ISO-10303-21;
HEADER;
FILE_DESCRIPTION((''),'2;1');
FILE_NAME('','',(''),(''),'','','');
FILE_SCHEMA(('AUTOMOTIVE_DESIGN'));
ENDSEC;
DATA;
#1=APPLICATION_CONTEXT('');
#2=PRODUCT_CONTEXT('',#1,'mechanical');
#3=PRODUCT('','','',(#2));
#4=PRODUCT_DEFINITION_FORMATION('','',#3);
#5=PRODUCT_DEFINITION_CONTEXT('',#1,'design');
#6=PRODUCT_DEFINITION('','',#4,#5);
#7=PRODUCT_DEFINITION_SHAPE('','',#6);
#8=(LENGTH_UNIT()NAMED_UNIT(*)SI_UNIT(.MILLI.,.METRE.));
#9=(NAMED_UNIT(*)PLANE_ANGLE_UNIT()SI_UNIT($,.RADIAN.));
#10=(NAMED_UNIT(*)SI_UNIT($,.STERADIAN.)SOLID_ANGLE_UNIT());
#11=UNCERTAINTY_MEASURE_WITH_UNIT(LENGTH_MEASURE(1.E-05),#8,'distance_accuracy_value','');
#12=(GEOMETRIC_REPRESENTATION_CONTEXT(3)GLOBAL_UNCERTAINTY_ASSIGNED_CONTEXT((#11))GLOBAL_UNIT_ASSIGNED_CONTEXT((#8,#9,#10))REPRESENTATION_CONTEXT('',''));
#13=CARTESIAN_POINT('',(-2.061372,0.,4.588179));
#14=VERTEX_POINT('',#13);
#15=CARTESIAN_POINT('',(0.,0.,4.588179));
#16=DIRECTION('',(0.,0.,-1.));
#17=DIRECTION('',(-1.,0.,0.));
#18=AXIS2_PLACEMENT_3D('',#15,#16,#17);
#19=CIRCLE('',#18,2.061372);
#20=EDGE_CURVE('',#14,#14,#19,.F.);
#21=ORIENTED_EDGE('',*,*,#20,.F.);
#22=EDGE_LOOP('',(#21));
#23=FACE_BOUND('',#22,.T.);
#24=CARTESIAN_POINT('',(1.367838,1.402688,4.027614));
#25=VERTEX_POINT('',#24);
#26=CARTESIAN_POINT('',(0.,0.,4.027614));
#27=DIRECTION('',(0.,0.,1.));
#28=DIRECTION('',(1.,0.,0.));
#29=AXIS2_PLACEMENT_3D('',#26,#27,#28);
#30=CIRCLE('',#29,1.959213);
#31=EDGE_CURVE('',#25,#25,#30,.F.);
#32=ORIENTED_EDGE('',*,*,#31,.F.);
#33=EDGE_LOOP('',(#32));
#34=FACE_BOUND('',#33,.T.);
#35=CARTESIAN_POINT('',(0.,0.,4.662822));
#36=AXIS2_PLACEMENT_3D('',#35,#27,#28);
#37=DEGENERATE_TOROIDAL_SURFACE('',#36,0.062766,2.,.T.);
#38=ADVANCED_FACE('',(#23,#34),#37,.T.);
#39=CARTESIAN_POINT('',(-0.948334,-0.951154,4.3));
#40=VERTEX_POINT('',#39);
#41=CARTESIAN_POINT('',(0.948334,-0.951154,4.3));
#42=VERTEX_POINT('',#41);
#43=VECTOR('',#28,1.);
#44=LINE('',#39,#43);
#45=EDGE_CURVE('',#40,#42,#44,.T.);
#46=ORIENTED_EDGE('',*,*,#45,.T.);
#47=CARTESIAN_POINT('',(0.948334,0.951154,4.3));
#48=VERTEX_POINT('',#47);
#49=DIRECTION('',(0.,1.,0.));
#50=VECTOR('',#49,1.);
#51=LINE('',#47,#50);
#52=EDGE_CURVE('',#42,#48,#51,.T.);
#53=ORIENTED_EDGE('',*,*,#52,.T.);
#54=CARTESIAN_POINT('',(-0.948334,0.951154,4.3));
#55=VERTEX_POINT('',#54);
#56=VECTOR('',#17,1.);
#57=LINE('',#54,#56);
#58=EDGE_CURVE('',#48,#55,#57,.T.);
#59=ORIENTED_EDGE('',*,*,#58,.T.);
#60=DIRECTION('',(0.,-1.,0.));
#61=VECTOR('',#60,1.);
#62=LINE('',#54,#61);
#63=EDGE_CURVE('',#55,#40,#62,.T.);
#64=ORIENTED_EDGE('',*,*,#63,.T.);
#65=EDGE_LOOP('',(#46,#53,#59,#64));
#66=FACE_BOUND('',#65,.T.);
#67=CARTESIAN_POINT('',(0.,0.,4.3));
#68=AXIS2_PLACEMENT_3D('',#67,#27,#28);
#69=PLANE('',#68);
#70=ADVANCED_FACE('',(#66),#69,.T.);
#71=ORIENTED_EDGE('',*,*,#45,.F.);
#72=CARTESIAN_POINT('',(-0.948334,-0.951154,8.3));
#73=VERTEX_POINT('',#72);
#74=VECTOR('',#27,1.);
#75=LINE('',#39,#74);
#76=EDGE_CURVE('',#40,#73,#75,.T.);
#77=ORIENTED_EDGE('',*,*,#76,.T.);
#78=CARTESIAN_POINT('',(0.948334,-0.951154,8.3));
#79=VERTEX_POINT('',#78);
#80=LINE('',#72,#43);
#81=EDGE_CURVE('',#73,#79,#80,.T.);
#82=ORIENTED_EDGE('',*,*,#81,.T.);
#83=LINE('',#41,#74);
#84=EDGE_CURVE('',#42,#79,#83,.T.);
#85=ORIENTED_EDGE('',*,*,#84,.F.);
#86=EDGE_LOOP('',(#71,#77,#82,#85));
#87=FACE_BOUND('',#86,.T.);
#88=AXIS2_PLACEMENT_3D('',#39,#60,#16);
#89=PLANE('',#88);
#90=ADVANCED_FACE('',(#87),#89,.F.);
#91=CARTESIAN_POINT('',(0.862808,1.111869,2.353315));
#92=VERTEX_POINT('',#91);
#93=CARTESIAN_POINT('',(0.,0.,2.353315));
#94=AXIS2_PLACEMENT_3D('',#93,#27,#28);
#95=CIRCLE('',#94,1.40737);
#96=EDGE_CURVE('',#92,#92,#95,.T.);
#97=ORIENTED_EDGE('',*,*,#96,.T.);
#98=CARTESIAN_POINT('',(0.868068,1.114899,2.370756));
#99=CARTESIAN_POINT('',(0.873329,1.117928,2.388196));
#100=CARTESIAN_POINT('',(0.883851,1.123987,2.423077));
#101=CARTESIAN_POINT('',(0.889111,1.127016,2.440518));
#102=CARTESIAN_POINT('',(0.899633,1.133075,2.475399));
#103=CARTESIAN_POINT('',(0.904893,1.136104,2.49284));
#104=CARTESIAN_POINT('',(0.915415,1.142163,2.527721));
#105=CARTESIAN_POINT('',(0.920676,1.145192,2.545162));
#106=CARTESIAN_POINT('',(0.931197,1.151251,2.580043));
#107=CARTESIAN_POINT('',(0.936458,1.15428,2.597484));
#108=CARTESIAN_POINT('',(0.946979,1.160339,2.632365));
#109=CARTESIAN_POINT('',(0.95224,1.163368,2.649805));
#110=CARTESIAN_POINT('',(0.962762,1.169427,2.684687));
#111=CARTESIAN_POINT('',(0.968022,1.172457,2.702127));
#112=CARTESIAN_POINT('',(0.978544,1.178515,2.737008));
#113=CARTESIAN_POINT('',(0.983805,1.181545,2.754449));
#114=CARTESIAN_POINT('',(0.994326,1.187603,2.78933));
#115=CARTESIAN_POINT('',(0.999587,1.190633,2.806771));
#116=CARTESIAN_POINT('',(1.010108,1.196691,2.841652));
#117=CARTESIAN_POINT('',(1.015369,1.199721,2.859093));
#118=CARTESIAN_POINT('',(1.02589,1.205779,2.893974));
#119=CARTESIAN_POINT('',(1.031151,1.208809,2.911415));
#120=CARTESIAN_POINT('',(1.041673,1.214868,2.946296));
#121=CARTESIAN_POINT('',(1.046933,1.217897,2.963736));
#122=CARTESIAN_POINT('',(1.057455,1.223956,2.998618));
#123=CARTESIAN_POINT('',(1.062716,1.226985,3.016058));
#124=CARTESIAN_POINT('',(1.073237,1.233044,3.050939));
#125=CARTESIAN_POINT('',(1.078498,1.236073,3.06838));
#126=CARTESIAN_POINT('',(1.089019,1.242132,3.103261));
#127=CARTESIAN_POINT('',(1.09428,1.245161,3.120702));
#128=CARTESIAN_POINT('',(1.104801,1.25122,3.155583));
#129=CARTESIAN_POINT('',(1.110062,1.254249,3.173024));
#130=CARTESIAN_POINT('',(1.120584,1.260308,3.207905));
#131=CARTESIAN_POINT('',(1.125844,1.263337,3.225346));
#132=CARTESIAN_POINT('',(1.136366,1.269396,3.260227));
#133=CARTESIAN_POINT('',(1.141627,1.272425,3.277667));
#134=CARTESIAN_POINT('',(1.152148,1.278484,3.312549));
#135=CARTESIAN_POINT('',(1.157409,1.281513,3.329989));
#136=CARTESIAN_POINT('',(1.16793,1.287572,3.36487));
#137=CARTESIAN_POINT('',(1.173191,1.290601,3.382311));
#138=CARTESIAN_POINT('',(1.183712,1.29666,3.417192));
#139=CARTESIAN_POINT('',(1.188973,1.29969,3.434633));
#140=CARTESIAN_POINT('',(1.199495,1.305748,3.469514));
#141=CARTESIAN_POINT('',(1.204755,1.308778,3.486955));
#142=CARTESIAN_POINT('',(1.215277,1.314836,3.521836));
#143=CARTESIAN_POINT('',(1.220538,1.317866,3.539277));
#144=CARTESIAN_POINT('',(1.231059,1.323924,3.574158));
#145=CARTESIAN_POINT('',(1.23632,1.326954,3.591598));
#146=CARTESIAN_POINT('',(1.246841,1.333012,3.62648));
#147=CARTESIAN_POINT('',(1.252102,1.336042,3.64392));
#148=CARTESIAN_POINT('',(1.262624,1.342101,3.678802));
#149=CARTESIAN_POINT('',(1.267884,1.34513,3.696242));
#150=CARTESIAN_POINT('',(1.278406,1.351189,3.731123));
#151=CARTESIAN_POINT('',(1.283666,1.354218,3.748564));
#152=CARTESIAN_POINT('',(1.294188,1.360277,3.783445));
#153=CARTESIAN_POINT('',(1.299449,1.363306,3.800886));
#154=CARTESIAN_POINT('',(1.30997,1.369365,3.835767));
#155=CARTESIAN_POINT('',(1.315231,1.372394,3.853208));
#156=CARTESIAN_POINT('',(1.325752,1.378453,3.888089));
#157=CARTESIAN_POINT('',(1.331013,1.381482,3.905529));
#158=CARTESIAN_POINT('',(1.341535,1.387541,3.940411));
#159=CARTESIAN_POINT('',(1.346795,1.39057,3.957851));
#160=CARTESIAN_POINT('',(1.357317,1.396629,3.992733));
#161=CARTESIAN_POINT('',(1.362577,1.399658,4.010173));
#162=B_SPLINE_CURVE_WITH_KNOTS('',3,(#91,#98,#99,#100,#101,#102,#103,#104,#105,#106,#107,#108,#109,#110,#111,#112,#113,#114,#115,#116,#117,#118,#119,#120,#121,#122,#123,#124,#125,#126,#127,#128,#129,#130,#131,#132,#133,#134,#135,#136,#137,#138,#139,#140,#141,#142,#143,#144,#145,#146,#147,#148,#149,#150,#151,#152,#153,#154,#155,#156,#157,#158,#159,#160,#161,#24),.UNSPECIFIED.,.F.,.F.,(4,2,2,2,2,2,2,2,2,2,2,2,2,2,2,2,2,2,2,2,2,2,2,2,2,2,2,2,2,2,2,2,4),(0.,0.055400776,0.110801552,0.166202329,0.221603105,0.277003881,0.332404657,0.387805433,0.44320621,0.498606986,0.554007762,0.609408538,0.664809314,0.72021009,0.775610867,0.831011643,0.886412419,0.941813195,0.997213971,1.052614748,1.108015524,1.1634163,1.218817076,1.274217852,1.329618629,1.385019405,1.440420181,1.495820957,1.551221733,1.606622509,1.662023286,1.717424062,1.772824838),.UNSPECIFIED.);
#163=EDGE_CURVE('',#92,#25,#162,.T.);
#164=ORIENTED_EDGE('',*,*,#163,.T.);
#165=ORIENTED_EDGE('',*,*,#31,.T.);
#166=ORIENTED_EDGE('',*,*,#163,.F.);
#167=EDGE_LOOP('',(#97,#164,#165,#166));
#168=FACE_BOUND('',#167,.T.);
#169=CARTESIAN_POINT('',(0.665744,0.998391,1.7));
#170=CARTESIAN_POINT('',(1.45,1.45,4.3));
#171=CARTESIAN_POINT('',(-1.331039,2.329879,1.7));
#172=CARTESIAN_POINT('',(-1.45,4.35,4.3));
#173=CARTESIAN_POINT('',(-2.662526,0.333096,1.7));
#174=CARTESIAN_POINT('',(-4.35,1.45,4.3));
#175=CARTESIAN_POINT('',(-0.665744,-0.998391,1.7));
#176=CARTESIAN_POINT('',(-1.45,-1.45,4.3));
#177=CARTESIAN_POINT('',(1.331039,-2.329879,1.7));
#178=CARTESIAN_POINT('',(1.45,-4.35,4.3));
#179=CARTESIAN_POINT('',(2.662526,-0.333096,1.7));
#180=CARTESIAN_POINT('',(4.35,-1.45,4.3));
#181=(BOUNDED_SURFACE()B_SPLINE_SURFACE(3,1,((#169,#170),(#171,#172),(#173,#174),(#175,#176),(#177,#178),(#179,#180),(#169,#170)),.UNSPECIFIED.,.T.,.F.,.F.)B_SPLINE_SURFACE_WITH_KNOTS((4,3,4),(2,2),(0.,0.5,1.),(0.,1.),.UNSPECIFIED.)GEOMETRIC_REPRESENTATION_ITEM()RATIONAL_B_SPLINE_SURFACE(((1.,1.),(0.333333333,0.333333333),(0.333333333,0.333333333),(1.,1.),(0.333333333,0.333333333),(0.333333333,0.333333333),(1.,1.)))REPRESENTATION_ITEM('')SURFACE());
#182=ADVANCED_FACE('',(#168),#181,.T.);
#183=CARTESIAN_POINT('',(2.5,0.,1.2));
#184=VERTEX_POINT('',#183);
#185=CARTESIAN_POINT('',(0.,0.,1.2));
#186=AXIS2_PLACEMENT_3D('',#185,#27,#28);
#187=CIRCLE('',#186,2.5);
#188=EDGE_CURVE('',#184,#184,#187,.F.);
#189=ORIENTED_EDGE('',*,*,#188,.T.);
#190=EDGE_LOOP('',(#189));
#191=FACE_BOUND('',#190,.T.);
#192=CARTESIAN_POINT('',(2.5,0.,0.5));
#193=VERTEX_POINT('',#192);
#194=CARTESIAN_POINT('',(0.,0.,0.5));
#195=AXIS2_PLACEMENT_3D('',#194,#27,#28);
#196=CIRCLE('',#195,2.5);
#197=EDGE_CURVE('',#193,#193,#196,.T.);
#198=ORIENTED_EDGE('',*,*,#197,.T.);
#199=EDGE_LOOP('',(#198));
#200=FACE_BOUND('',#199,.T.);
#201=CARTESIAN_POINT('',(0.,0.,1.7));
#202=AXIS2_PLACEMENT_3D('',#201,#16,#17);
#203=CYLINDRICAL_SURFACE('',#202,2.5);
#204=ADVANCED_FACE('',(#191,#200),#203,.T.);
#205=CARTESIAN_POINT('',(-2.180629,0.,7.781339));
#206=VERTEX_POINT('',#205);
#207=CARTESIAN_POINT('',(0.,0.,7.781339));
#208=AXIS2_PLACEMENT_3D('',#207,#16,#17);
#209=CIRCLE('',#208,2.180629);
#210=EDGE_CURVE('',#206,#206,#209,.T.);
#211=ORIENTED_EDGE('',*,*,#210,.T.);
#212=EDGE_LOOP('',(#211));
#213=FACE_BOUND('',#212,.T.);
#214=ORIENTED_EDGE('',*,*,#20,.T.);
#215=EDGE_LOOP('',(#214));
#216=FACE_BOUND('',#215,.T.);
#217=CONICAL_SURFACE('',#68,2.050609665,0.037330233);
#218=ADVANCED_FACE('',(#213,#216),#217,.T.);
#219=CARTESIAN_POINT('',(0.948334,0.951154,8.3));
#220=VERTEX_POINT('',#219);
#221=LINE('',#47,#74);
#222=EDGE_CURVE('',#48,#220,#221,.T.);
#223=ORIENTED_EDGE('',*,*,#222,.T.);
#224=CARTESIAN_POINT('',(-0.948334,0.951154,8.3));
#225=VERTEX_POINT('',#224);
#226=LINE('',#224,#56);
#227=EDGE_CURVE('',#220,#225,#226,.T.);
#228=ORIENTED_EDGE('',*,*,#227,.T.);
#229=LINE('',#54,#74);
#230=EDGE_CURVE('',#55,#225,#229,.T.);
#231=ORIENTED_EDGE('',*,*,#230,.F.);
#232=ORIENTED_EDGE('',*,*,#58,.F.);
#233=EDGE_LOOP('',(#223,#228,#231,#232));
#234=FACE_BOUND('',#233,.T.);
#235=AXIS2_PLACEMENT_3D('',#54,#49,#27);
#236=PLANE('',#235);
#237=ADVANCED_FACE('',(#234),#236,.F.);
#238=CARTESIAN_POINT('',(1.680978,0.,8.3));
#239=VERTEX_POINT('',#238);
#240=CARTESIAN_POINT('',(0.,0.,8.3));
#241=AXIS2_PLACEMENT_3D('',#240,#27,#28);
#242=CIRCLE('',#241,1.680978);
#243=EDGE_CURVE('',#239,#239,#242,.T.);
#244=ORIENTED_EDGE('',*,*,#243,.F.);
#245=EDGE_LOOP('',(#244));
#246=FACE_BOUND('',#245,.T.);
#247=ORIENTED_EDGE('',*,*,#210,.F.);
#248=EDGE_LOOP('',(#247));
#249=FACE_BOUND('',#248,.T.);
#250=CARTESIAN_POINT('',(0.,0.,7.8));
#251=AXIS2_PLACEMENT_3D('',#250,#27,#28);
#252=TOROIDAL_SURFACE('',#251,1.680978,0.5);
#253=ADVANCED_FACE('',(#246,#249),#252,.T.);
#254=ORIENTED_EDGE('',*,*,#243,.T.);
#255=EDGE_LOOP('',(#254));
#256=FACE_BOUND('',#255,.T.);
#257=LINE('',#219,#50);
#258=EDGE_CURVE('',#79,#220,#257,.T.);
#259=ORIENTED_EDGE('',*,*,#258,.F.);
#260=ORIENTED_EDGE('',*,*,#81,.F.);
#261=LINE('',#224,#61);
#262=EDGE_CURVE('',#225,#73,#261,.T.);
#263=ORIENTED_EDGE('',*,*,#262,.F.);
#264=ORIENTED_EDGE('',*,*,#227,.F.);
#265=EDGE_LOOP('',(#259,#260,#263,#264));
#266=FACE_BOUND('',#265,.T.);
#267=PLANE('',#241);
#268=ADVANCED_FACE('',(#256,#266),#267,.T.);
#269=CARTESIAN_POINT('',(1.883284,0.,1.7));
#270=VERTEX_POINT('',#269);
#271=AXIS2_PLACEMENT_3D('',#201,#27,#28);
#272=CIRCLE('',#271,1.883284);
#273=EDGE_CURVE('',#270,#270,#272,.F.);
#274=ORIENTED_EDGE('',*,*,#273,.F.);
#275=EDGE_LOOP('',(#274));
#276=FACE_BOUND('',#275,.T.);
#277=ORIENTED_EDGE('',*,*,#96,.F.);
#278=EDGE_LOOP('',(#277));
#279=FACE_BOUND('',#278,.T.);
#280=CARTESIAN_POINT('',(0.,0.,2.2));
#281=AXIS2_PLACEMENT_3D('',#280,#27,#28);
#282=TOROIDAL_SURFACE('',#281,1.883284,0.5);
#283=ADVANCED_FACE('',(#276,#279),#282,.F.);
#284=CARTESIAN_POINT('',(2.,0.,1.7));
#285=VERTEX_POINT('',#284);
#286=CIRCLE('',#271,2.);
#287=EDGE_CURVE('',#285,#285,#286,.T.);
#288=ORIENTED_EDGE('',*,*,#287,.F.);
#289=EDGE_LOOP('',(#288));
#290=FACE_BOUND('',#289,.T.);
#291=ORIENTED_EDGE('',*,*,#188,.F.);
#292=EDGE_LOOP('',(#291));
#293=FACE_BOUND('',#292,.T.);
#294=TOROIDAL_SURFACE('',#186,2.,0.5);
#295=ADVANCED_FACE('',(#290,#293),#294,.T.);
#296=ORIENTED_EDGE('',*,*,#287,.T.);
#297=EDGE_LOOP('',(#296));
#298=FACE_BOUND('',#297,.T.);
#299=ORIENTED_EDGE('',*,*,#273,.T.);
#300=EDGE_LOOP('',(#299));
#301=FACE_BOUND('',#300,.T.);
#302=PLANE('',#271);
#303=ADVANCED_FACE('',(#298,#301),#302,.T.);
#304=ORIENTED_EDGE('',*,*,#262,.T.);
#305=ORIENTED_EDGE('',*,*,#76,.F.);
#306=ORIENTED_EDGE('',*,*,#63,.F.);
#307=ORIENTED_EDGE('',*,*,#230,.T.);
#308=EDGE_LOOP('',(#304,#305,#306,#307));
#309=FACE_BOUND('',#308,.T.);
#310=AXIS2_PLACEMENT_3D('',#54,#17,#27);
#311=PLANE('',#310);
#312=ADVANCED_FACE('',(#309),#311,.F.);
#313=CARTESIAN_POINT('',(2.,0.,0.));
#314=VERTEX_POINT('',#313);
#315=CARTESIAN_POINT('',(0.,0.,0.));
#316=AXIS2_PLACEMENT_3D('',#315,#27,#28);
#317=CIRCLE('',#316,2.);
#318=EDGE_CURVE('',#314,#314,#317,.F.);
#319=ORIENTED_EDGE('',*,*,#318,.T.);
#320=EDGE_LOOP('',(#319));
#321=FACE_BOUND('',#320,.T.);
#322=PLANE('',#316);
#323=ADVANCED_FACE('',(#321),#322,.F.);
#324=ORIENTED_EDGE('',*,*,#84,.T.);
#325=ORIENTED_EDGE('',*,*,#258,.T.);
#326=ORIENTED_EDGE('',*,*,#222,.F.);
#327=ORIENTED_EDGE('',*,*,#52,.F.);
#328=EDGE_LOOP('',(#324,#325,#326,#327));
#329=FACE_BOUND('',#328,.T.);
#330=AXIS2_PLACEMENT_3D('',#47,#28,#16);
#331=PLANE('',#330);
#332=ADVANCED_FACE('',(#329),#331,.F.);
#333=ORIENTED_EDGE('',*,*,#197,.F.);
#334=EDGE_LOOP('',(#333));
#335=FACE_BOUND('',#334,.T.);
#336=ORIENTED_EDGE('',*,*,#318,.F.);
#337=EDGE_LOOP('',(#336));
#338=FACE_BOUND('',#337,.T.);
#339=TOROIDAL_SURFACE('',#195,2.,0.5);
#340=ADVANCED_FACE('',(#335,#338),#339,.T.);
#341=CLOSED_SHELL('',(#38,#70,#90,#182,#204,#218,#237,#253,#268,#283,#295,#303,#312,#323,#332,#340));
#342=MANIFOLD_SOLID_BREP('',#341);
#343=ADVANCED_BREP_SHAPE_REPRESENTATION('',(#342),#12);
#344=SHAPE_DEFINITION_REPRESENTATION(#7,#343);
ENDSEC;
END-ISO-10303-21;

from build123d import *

# Parameters (mm, degrees)
SKETCH_1_R          = 2.5
EXTRUDE_1_DEPTH     = 1.7
FILLET_7_R          = 0.5
SKETCH_7_R          = 2.050609665
SKETCH_8_R          = 2.2
SKETCH_10_W         = 1.896668422
SKETCH_10_H         = 1.902308834
CUT_EXTRUDE_1_DEPTH = 4
FILLET_13_R         = 0.5
FILLET_17_R         = 2
FILLET_18_R         = 0.5
FILLET_19_R         = 0.5


with BuildPart() as part:
    # 草图1 → 凸台-拉伸1 (new body)
    with BuildSketch(Plane.XY):
        Circle(SKETCH_1_R)
    extrude(amount=EXTRUDE_1_DEPTH)

    # 圆角7
    fillet_7_edges = [part.edges().sort_by_distance(p)[0] for p in [
        (-2.5, 0, 0),
    ]]
    fillet(fillet_7_edges, radius=FILLET_7_R)

    # 放样1: read off the stored shape, not the designer's step
    # 放样1: loft between two sections, ruled curve by curve
    loft_1_from = [
        Edge.make_bspline([(0.665743614, 0.998391427, 1.7), (-1.33103924, 2.329878654, 1.7), (-2.662526467, 0.333095801, 1.7), (-0.665743614, -0.998391427, 1.7), (1.33103924, -2.329878654, 1.7), (2.662526467, -0.333095801, 1.7), (0.665743614, 0.998391427, 1.7)], [0, 0, 0, 0, 0.5, 0.5, 0.5, 1, 1, 1, 1], 3, [1, 0.333333333, 0.333333333, 1, 0.333333333, 0.333333333, 1]),
    ]
    loft_1_to = [
        Edge.make_bspline([(1.45, 1.45, 4.3), (-1.45, 4.35, 4.3), (-4.35, 1.45, 4.3), (-1.45, -1.45, 4.3), (1.45, -4.35, 4.3), (4.35, -1.45, 4.3), (1.45, 1.45, 4.3)], [0, 0, 0, 0, 0.5, 0.5, 0.5, 1, 1, 1, 1], 3, [1, 0.333333333, 0.333333333, 1, 0.333333333, 0.333333333, 1]),
    ]
    loft_1 = Solid(Shell([*[Face.make_surface_from_curves(loft_1_from[k], loft_1_to[k]) for k in range(1)], Face(Wire(loft_1_from)), Face(Wire(loft_1_to))]))
    add(loft_1)

    # 草图7 → 放样3 section 0
    with BuildSketch(Plane.XY.offset(4.3)):
        Circle(SKETCH_7_R)
    # 草图8 → 放样3 section 1
    with BuildSketch(Plane.XY.offset(8.3)):
        Circle(SKETCH_8_R)
    loft()

    # 草图10 → 切除-拉伸1 (cut)
    with BuildSketch(Plane.XY.offset(8.3)):
        Rectangle(SKETCH_10_W, SKETCH_10_H)
    extrude(amount=-CUT_EXTRUDE_1_DEPTH, mode=Mode.SUBTRACT)

    # 圆角13
    fillet_13_edges = [part.edges().sort_by_distance(p)[0] for p in [
        (-2.5, 0, 1.7),
    ]]
    fillet(fillet_13_edges, radius=FILLET_13_R)

    # 圆角17
    fillet_17_edges = [part.edges().sort_by_distance(p)[0] for p in [
        (-1.894516299, -0.784734346, 4.3),
    ]]
    fillet(fillet_17_edges, radius=FILLET_17_R)

    # 圆角18
    fillet_18_edges = [part.edges().sort_by_distance(p)[0] for p in [
        (-0.665743614, -0.998391427, 1.7),
    ]]
    fillet(fillet_18_edges, radius=FILLET_18_R)

    # 圆角19
    fillet_19_edges = [part.edges().sort_by_distance(p)[0] for p in [
        (-2.2, 0, 8.3),
    ]]
    fillet(fillet_19_edges, radius=FILLET_19_R)


solid = part.part
